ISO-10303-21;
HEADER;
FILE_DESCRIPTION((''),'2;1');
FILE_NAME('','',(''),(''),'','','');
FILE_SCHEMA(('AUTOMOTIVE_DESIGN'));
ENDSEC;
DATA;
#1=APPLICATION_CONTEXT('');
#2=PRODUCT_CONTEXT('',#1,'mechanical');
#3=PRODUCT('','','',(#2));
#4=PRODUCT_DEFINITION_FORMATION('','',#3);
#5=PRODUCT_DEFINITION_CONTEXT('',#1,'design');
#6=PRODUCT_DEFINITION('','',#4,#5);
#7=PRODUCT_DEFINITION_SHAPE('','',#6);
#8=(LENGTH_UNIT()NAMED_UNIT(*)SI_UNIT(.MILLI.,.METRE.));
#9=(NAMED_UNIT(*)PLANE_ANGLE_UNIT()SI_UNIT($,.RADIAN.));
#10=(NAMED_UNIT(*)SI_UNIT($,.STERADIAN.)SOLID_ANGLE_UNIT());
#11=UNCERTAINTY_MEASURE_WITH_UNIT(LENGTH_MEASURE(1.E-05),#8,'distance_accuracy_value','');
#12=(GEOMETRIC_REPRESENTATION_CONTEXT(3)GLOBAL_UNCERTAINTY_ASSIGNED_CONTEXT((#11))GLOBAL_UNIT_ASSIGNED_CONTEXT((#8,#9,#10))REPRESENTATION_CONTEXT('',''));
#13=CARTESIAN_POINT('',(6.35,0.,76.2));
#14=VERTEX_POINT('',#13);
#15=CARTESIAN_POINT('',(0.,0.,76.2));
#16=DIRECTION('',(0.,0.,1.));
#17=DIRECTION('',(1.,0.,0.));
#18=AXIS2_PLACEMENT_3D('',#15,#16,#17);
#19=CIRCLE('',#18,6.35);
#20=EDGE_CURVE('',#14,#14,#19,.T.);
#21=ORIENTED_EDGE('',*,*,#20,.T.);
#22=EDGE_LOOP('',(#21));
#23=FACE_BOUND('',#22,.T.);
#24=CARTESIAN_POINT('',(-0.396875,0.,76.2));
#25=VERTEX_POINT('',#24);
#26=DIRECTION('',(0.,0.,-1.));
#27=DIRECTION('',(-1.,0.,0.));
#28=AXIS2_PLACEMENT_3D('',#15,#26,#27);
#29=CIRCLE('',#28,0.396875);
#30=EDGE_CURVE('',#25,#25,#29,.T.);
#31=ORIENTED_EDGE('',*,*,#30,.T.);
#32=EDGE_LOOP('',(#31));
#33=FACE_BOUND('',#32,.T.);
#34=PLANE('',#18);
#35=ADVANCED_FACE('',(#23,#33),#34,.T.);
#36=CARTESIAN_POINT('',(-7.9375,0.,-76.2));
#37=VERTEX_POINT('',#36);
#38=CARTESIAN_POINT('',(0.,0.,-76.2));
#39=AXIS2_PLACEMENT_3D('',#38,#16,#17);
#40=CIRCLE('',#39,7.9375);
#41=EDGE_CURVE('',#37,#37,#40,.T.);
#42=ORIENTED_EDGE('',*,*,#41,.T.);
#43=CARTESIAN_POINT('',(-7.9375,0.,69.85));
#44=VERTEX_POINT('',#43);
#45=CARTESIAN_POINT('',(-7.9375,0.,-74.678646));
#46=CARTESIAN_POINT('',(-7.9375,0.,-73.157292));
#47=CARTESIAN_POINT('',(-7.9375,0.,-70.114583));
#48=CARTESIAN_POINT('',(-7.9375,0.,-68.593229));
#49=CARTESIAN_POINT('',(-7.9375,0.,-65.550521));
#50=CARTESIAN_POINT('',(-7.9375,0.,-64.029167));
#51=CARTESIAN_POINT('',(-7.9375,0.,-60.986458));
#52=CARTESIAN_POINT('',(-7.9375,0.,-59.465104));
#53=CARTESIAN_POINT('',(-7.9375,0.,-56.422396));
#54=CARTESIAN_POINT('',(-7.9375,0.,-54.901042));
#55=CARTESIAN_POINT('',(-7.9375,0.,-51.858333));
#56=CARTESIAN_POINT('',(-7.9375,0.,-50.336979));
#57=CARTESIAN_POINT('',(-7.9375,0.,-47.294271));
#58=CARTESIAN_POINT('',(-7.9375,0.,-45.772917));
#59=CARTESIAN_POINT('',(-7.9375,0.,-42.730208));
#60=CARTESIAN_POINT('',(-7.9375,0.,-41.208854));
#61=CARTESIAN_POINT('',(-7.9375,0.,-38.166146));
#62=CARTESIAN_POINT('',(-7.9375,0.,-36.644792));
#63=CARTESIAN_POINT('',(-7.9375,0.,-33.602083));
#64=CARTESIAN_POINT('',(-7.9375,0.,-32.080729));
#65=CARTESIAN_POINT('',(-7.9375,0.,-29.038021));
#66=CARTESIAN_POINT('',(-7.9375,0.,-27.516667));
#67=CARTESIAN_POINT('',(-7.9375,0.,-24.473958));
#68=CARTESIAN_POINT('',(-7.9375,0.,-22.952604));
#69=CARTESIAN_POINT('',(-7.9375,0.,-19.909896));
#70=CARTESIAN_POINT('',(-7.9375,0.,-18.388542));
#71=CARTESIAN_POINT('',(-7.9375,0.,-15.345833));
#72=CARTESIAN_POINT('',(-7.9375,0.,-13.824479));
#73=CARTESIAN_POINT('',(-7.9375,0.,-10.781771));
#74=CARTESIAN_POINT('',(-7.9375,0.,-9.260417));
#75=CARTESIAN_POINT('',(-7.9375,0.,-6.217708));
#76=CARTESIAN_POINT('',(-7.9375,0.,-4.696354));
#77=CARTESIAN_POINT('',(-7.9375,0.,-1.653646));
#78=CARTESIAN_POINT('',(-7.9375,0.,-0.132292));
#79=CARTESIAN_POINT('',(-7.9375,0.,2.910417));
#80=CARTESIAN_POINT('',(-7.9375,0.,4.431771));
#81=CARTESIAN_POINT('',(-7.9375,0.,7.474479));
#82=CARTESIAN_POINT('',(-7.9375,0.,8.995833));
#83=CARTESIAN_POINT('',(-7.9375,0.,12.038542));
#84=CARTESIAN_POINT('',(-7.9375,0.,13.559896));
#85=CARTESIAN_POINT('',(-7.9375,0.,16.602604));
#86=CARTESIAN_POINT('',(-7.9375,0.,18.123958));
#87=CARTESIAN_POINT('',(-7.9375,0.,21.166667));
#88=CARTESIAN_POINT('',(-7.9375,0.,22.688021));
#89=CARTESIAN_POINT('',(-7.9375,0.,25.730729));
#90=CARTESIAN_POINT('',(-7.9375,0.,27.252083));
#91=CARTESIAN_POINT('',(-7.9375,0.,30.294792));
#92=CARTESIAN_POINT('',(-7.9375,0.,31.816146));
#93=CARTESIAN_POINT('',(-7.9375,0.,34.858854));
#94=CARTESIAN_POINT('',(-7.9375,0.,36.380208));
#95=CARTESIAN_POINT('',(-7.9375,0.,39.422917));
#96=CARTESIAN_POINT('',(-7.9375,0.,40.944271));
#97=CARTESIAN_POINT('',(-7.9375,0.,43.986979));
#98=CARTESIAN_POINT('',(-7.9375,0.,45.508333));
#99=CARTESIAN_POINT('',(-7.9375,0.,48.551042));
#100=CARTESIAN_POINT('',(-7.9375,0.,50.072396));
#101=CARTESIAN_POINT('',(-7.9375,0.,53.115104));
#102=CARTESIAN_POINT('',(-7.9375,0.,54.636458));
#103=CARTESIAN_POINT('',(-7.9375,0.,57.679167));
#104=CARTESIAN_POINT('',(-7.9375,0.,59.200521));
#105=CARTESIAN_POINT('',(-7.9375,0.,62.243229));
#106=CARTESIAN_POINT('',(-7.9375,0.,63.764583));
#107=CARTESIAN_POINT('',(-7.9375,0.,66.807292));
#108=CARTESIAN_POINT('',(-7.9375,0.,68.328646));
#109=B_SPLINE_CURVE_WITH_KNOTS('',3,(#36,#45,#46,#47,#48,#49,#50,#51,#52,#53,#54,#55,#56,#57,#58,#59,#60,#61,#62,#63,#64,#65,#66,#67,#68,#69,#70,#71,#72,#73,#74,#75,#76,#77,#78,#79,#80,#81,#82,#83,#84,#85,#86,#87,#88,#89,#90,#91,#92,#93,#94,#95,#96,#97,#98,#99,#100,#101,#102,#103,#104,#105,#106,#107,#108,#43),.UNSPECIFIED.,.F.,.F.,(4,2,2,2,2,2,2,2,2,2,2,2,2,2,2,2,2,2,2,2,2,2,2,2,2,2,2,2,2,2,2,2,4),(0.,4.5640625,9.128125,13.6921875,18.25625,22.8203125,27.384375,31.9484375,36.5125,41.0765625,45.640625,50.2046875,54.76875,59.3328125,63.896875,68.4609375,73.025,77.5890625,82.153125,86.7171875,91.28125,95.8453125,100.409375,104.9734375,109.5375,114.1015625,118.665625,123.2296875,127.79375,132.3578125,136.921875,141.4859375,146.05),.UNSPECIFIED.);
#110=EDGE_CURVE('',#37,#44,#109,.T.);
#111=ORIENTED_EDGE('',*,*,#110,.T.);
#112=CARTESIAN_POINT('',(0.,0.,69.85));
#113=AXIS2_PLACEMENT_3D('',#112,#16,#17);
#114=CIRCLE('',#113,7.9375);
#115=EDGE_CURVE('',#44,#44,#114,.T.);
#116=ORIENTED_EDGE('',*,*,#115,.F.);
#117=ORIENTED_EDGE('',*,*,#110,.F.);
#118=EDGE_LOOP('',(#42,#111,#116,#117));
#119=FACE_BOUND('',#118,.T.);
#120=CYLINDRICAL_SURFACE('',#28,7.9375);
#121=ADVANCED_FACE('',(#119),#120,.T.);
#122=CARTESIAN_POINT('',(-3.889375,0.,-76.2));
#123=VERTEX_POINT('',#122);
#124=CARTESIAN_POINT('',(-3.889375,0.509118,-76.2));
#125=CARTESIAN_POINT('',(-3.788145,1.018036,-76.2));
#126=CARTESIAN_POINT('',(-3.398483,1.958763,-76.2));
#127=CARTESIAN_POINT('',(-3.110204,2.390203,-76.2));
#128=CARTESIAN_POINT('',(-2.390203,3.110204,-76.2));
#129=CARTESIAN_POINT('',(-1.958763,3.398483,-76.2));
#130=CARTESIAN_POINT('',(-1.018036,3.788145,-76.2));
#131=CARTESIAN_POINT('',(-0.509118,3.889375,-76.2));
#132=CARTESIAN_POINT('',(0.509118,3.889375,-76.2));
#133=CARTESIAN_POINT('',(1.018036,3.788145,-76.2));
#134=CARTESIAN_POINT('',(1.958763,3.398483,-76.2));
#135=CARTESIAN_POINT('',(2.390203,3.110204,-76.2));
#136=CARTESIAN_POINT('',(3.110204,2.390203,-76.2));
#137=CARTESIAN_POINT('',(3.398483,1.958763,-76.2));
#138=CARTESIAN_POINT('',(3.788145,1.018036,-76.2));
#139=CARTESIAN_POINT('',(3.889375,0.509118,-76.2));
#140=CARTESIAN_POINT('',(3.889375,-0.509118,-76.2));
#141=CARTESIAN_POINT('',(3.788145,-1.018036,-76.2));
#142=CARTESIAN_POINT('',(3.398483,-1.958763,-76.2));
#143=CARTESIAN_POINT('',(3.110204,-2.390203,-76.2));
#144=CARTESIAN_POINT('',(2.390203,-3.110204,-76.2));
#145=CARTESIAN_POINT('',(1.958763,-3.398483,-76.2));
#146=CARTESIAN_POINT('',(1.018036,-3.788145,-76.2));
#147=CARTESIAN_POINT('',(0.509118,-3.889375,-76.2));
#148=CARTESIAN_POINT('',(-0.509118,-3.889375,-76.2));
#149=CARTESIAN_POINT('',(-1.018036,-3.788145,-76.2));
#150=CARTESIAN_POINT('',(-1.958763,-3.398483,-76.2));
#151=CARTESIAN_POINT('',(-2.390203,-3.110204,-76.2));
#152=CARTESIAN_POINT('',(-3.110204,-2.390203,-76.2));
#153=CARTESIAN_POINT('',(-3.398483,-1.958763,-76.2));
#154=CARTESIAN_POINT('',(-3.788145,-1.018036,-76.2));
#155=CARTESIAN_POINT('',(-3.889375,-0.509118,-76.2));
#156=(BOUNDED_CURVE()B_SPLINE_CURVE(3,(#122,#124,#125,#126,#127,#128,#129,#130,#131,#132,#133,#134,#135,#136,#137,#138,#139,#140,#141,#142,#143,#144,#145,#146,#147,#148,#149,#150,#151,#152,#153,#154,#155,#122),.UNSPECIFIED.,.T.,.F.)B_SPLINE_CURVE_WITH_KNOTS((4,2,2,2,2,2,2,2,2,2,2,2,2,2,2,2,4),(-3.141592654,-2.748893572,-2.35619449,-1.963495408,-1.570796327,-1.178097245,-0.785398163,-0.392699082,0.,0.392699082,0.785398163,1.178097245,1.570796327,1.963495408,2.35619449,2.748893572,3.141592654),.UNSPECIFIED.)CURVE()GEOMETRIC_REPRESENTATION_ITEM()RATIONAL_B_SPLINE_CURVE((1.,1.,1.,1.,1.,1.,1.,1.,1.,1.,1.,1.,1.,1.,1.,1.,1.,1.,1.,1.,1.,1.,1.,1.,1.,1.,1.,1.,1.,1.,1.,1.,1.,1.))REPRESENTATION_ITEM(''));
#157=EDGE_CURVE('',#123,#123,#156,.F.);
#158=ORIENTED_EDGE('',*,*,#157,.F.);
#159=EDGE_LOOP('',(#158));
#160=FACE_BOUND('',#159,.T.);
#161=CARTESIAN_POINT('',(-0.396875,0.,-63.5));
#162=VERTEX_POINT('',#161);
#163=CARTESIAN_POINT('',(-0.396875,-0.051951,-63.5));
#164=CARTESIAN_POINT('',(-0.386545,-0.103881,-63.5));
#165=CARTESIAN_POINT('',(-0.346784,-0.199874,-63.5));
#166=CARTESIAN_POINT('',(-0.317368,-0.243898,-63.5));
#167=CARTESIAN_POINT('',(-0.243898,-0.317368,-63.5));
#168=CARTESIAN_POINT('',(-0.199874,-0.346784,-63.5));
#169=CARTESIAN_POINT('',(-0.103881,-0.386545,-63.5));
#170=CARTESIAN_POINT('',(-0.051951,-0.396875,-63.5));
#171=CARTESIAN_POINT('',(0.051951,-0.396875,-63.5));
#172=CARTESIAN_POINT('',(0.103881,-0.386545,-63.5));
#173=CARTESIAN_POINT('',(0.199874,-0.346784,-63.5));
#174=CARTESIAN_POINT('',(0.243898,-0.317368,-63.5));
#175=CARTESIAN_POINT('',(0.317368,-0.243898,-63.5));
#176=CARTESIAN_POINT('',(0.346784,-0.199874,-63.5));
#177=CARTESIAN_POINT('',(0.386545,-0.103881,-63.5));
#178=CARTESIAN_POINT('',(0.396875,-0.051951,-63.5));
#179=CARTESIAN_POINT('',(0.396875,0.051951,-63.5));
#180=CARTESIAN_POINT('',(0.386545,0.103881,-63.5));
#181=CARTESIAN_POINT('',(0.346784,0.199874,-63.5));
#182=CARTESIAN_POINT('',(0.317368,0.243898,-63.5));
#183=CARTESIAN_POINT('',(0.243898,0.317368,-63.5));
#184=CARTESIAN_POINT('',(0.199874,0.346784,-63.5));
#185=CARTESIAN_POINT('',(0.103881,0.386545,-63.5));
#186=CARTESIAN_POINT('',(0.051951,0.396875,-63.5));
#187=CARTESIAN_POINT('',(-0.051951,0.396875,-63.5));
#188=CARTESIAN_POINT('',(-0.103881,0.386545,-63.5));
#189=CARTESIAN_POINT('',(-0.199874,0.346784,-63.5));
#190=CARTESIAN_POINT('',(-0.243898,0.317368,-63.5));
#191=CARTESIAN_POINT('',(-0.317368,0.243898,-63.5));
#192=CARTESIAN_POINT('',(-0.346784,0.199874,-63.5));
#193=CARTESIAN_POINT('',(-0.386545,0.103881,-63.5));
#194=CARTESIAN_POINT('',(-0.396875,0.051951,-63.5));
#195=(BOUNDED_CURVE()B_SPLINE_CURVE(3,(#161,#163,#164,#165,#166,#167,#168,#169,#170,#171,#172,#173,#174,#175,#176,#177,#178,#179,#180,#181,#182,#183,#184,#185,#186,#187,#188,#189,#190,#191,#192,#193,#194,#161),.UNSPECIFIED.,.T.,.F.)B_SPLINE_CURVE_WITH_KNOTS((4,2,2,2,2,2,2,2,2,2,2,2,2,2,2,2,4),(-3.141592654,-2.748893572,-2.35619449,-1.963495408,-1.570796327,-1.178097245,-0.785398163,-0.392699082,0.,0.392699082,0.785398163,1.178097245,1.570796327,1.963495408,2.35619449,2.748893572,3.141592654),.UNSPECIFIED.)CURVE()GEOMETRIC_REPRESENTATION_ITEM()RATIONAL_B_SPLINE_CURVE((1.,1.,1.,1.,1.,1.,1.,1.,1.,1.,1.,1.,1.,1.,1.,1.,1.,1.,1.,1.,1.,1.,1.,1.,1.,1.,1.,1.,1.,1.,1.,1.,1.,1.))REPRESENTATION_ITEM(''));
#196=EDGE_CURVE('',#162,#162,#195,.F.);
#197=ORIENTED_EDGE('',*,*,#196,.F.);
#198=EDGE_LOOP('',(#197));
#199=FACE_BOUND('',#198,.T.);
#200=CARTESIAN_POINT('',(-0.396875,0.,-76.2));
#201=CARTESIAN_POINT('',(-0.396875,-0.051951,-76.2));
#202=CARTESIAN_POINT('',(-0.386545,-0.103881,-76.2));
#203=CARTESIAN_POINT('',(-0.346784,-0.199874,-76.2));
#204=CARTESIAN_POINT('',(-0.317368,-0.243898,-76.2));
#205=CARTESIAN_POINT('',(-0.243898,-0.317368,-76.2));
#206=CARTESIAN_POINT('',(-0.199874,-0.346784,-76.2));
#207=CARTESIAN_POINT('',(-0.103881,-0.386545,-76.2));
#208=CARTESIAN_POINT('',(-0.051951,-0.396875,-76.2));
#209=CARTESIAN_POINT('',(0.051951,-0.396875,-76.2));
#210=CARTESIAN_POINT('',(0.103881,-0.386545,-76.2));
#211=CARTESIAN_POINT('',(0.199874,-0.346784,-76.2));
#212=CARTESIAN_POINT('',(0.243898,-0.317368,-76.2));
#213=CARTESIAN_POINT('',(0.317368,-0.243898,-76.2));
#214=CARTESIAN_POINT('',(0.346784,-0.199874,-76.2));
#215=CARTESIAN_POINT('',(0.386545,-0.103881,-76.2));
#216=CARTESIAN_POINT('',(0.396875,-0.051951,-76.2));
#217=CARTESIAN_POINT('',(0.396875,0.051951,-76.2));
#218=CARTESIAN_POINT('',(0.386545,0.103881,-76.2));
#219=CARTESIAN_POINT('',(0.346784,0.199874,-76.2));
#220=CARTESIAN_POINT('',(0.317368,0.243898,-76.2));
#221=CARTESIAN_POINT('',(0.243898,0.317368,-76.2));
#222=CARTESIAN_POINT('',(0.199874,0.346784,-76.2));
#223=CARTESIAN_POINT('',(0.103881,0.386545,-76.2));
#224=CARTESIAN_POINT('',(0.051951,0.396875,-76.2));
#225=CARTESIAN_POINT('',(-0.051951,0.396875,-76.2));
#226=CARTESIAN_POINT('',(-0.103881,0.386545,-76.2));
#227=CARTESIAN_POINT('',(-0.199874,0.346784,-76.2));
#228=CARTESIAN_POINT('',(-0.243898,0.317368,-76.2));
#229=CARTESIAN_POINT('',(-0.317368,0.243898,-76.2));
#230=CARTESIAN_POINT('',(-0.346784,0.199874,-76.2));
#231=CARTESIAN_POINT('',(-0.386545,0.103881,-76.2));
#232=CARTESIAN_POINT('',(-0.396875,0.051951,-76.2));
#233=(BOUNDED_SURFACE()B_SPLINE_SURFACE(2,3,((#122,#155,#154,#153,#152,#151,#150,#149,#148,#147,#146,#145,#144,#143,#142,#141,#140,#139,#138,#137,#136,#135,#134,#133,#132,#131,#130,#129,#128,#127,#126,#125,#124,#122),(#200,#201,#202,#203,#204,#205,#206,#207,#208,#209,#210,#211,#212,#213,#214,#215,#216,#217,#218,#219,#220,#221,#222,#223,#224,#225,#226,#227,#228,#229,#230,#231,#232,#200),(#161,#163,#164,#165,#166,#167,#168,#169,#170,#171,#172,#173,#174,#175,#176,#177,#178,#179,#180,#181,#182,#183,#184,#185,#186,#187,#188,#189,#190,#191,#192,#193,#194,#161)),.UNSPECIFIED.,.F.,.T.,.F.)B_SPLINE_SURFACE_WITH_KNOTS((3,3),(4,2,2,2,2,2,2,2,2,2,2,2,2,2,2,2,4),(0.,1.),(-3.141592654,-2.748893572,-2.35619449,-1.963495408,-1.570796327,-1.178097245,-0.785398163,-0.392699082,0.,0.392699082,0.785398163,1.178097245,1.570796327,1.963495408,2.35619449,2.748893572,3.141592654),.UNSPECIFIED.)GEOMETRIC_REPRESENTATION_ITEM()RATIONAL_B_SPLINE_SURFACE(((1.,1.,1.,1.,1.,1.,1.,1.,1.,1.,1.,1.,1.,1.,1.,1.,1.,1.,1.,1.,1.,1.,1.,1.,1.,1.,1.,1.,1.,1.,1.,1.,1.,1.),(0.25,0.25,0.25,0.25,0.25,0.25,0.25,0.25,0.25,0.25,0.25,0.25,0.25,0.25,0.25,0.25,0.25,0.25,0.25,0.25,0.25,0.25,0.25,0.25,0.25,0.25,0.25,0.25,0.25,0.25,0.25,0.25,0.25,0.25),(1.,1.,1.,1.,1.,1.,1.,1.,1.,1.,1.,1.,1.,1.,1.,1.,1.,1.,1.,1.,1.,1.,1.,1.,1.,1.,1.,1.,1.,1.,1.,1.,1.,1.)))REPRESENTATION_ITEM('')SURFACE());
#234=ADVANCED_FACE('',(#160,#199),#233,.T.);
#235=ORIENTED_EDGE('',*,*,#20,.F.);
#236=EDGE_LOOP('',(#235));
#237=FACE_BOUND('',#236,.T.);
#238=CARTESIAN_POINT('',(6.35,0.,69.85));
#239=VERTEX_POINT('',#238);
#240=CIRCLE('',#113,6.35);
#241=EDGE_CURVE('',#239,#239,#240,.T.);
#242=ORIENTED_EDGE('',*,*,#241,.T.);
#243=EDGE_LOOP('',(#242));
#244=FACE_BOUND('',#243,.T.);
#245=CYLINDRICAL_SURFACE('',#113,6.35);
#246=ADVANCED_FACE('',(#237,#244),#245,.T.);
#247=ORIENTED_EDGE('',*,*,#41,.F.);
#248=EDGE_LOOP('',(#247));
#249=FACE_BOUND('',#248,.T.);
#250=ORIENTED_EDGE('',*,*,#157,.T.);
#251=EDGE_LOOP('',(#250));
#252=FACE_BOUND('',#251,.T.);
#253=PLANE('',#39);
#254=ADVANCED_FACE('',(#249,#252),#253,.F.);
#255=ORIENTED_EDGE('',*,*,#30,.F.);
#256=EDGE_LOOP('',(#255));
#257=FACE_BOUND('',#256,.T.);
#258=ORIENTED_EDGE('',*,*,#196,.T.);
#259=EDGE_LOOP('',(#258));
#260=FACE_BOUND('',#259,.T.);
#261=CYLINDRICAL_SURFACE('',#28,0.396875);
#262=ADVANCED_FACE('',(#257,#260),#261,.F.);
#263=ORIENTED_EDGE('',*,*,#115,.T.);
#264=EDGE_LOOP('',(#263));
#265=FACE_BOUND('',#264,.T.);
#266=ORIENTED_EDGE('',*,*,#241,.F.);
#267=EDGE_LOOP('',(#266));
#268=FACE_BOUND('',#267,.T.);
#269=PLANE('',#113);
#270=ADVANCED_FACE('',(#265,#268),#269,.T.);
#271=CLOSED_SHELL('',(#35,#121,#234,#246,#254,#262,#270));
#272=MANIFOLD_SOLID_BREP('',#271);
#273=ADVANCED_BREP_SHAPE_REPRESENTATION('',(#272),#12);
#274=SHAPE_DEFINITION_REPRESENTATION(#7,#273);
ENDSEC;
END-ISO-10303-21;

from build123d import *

# Parameters (mm, degrees)
SKETCH3_R           = 7.9375
BOSS_EXTRUDE1_DEPTH = 76.2
SKETCH5_OUTSIDE_W   = 48.682
SKETCH5_OUTSIDE_H   = 48.682
SKETCH5_OUTSIDE_R   = 6.35
CUT_EXTRUDE1_DEPTH  = 6.35
SKETCH6_R           = 0.396875
CUT_EXTRUDE2_DEPTH  = 152.4
FILLET5_SIZE        = 3.4925
FILLET5_SIZE_2      = 12.7


with BuildPart() as part:
    # Sketch3 → Boss-Extrude1 (new, symmetric)
    with BuildSketch(Plane.XY):
        with Locations(Location((0, 0, 0), (0, 0, 180))):
            Circle(SKETCH3_R)
    extrude(amount=BOSS_EXTRUDE1_DEPTH, both=True)

    # Sketch5 outside → Cut-Extrude1 (cut)
    with BuildSketch(Plane.XY.offset(76.2)):
        Rectangle(SKETCH5_OUTSIDE_W, SKETCH5_OUTSIDE_H)
        Circle(SKETCH5_OUTSIDE_R, mode=Mode.SUBTRACT)
    extrude(amount=-CUT_EXTRUDE1_DEPTH, mode=Mode.SUBTRACT)

    # Sketch6 → Cut-Extrude2 (cut)
    with BuildSketch(Plane(origin=(0, 0, -76.2), x_dir=(-1, 0, 0), z_dir=(0, 0, -1))):
        Circle(SKETCH6_R)
    extrude(amount=-CUT_EXTRUDE2_DEPTH, mode=Mode.SUBTRACT)

    # Fillet5
    # a fillet whose section is not a circle: 12.7, 3.4925 mm, written as the material it takes off along each edge
    with BuildSketch(Plane(origin=(0, 0, -76.2), x_dir=(-1, 0, 0), z_dir=(0, -1, 0))) as fillet5_piece_1:
        with BuildLine():
            Bezier((0.396875 + FILLET5_SIZE, 0), (0.396875, 0), (0.396875, -FILLET5_SIZE_2), weights=[1, 0.25, 1])
            Line((0.396875, -FILLET5_SIZE_2), (0.396875, 0))
            Line((0.396875, 0), (0.396875 + FILLET5_SIZE, 0))
        make_face()
    revolve(axis=Axis((0, 0, -76.2), (0, 0, -1)), mode=Mode.SUBTRACT)


solid = part.part
